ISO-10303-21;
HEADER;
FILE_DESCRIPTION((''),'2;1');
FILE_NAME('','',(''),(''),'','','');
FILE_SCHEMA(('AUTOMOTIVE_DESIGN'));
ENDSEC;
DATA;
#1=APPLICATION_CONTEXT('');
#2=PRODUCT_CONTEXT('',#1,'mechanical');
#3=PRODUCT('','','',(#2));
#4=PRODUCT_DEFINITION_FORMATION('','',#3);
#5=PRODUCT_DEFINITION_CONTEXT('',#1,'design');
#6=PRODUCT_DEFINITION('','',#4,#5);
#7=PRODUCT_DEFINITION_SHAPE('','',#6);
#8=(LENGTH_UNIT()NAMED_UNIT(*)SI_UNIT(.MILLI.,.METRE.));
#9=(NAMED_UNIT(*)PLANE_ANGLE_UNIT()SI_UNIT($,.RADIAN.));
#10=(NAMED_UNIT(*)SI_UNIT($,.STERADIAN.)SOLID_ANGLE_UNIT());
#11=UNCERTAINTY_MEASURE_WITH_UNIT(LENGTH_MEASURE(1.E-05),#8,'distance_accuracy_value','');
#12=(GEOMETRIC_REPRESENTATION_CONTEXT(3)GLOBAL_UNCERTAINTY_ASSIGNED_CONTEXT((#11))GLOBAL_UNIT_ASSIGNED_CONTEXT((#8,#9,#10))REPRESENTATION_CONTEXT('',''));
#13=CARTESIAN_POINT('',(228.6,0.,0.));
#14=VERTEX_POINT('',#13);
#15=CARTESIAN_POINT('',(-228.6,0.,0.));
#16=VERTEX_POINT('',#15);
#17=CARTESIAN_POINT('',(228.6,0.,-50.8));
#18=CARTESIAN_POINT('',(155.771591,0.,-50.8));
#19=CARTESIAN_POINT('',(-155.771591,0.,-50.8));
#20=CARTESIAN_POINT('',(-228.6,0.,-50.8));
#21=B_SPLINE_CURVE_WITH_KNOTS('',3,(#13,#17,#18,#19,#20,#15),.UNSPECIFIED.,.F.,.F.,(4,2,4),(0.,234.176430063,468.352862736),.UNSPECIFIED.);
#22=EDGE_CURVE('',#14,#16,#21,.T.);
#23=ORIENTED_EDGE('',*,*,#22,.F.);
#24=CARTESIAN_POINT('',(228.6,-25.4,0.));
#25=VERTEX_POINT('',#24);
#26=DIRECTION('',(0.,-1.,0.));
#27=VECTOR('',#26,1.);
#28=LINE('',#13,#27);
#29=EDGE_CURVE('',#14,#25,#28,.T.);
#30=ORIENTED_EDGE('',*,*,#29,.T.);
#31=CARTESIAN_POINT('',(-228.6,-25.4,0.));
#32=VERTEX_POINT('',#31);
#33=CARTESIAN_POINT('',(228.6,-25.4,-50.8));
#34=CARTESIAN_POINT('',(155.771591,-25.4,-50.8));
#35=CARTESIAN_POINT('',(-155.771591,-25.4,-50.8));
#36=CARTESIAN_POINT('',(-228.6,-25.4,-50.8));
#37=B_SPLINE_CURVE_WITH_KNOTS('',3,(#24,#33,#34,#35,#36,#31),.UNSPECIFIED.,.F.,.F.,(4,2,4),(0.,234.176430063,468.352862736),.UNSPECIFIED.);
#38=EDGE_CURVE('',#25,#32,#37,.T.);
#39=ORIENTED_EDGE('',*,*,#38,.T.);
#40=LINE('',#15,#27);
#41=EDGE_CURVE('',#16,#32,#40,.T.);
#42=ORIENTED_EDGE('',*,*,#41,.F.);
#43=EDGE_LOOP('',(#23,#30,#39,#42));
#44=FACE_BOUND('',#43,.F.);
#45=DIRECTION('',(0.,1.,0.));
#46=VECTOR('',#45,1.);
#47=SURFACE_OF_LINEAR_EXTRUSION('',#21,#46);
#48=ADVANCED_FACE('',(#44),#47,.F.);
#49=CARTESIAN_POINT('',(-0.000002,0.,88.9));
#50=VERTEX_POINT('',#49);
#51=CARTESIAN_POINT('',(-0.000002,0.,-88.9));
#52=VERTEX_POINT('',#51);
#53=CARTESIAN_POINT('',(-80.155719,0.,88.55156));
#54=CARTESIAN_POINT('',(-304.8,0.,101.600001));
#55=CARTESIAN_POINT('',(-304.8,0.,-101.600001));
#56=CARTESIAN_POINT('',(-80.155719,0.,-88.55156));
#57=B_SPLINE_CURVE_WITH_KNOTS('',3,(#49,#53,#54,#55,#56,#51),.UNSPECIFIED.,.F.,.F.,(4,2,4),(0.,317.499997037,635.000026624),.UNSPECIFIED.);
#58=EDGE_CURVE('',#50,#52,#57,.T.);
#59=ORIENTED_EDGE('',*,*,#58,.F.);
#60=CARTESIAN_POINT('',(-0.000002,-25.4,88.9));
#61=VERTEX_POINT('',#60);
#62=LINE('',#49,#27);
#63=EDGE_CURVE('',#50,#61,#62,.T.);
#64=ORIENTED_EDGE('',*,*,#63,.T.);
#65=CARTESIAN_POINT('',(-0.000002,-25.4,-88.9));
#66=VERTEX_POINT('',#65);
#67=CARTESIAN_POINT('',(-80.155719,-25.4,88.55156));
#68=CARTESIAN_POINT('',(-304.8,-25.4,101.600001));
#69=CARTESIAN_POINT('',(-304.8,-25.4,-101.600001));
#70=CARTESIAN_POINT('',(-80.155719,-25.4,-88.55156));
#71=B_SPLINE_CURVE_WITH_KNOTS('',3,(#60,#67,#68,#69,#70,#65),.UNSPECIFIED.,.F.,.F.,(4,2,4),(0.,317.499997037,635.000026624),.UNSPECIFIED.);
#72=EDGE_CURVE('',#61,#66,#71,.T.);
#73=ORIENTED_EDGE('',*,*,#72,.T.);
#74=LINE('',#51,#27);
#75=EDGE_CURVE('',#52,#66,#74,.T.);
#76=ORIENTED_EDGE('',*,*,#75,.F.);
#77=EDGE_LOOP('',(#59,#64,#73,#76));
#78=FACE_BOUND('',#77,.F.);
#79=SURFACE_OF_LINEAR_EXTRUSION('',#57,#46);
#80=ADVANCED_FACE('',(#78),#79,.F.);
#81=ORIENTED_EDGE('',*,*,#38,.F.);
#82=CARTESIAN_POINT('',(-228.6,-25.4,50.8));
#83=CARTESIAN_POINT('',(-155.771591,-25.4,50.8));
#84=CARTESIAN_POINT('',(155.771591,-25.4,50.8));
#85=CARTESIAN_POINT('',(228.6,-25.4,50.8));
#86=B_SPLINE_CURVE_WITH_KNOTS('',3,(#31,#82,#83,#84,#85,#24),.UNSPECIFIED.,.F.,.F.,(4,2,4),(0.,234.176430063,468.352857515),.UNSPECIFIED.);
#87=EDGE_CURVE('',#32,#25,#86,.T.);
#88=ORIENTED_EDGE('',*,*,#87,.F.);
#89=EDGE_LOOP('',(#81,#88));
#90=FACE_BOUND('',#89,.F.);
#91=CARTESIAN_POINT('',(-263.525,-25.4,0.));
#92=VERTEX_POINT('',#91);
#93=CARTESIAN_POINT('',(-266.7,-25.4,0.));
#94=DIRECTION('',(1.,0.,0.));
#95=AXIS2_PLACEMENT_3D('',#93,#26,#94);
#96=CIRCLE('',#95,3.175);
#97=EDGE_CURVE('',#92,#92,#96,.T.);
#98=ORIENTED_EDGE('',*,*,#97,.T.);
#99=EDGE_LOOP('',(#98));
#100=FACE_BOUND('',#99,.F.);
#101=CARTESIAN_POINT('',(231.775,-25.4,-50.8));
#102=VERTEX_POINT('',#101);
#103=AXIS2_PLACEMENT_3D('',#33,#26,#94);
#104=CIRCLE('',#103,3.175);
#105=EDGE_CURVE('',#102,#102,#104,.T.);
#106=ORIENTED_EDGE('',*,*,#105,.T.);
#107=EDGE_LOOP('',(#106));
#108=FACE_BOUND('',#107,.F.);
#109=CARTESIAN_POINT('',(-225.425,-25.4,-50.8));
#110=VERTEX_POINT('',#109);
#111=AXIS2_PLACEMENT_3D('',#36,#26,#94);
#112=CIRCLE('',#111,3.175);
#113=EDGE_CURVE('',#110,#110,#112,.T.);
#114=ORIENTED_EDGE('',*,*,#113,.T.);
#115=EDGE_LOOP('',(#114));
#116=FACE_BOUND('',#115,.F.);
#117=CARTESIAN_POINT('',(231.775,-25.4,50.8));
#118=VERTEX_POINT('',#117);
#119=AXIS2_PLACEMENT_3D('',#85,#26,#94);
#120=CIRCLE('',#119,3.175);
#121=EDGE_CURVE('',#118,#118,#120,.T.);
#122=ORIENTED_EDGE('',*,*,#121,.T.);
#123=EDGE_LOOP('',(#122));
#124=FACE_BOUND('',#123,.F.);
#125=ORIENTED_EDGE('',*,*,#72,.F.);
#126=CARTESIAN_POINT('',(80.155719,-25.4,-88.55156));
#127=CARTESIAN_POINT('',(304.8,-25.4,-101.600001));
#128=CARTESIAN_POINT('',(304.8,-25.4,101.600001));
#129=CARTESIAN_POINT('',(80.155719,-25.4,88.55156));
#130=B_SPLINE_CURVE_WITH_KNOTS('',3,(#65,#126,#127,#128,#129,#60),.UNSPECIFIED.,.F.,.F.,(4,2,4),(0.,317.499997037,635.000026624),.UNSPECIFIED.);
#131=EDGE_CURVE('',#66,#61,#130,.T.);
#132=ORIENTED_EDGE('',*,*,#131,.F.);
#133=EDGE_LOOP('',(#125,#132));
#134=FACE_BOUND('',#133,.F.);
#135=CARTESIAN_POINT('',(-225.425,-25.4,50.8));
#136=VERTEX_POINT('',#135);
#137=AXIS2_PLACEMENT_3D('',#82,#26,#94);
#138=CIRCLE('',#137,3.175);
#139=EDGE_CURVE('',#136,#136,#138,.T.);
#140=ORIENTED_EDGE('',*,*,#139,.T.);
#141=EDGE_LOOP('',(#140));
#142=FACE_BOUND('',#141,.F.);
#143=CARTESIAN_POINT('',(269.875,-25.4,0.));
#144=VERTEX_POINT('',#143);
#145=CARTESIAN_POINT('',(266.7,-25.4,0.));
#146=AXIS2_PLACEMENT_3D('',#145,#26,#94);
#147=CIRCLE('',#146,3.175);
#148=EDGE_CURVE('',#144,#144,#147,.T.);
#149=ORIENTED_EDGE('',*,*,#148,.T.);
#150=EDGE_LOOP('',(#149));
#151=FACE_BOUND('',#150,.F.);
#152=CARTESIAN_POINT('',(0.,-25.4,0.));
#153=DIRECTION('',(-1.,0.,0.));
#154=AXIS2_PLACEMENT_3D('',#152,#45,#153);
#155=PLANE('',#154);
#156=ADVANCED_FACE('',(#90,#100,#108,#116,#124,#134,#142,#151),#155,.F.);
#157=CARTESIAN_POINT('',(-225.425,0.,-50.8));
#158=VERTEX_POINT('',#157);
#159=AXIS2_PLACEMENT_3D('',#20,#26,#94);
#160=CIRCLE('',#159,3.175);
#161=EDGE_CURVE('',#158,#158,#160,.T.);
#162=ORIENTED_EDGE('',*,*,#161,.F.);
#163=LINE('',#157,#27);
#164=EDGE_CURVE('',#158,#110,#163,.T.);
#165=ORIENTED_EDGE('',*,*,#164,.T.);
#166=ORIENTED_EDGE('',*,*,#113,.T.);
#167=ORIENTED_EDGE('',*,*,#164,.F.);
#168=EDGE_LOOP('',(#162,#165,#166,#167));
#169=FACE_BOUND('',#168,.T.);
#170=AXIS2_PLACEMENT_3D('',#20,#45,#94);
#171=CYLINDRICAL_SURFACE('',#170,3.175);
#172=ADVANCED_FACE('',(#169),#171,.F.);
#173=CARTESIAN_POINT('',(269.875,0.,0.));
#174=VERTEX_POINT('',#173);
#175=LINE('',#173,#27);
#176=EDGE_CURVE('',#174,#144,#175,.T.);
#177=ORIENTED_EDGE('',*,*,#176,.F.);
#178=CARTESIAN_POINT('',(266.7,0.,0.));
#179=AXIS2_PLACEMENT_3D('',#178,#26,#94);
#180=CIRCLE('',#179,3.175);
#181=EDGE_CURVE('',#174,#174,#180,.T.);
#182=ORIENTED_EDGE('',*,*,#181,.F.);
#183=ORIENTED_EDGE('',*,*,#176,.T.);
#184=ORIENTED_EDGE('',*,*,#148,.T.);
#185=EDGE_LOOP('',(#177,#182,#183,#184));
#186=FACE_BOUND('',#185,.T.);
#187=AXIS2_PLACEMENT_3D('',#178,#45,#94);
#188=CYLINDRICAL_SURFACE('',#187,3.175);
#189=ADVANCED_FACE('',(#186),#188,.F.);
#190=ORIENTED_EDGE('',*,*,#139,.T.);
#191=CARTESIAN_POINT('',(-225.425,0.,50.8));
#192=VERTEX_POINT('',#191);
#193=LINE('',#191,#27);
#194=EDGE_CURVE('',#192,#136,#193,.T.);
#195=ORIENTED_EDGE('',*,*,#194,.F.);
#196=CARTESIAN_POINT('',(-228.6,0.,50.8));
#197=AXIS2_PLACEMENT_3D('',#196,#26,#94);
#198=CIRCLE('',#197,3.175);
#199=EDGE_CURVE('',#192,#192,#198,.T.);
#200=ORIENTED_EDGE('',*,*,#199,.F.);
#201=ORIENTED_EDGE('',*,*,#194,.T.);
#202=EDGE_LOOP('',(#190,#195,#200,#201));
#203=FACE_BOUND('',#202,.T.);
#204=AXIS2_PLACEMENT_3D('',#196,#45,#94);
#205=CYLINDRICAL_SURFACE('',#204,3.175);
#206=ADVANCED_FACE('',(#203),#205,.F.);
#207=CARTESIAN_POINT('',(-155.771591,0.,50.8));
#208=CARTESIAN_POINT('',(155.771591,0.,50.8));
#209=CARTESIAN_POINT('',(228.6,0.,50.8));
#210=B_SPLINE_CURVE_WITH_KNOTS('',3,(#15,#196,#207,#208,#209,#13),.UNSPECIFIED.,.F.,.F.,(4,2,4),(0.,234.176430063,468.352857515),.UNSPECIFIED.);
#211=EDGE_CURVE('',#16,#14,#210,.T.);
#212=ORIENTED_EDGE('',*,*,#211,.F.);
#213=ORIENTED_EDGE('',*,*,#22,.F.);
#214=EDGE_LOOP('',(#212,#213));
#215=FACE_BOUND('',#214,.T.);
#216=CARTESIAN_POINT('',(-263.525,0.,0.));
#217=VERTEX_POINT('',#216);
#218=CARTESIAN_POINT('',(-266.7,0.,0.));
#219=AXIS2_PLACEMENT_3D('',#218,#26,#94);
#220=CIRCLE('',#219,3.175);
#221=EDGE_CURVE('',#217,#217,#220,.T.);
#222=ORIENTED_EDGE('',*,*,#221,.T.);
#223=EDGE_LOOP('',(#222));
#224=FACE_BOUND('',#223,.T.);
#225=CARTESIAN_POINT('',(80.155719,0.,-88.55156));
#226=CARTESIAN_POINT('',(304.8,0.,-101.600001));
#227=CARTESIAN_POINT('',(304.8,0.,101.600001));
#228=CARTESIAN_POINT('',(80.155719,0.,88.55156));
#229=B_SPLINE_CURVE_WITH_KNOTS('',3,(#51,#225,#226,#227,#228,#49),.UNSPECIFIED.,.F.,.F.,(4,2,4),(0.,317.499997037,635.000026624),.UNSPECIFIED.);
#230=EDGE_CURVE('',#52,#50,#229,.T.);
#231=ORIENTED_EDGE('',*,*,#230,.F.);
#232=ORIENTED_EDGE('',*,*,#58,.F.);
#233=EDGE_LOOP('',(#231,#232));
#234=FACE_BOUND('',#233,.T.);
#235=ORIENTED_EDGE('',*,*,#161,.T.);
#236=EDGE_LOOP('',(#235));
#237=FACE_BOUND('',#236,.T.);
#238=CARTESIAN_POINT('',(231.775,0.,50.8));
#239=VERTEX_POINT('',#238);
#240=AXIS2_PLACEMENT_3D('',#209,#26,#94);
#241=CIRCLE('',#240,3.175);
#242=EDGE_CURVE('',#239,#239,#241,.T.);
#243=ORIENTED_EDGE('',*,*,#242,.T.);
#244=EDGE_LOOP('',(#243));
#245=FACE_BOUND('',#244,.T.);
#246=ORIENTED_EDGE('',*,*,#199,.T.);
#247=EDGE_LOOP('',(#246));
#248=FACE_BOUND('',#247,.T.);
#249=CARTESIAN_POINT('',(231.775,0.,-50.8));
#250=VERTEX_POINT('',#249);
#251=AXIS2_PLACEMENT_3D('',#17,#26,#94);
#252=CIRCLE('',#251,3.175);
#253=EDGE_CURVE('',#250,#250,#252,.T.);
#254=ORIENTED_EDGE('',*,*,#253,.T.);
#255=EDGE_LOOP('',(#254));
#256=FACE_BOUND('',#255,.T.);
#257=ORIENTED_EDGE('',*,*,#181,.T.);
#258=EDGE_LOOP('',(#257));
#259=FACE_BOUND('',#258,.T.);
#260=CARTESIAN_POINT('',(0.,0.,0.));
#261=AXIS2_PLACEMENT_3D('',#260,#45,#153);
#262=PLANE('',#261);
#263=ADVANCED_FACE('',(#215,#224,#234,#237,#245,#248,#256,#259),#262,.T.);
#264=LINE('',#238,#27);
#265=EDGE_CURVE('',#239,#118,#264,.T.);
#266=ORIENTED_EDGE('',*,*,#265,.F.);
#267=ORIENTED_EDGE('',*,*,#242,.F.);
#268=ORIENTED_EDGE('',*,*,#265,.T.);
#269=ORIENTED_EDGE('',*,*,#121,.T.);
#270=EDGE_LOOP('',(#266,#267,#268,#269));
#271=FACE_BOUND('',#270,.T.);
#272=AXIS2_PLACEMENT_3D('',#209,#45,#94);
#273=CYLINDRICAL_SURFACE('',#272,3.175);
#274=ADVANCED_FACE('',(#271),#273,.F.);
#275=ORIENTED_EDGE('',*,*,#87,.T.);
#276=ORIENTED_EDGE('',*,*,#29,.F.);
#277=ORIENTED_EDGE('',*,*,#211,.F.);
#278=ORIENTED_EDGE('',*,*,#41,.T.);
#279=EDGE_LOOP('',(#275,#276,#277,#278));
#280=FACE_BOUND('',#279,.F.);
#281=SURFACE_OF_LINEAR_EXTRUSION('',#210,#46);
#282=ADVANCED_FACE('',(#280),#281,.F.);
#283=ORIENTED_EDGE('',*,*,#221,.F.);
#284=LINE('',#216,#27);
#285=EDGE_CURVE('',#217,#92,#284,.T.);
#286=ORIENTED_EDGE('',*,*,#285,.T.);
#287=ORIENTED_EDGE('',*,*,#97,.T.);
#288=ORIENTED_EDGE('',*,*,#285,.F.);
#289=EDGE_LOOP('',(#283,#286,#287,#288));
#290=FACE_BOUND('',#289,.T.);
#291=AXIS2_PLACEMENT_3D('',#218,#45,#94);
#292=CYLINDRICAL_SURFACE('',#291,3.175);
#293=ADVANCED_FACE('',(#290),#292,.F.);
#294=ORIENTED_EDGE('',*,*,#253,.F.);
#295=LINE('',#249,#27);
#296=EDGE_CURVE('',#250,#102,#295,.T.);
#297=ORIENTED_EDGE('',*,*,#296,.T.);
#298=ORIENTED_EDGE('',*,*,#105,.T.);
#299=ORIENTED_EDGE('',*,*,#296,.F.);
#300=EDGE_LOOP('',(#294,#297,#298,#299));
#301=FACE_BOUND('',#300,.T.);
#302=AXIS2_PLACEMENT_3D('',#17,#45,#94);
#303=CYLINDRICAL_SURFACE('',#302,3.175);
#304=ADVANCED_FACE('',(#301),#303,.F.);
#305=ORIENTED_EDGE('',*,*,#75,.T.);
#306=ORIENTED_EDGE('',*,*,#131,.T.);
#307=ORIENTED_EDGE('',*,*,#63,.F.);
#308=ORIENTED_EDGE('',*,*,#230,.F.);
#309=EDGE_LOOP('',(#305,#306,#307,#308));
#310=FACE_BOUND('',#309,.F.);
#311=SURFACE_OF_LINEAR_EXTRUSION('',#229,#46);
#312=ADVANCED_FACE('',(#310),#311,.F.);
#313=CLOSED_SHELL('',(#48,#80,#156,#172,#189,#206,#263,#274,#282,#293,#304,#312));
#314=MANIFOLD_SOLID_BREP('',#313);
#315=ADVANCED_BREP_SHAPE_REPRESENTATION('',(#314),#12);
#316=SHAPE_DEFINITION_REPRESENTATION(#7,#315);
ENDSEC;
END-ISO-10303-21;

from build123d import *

# Parameters (mm, degrees)
F0_R     = 3.175
F1_DEPTH = 25.4


# Not quite as in the source:
# - ends of sketch curves that miss each other by under 0.0002 mm in the source are joined


with BuildPart() as f1:
    # F0 (on Front) → F1 (new body)
    with BuildSketch(Plane.XZ):
        with BuildLine():
            add(Edge.make_bspline(
                [(-304.8, 5.2081e-06), (-304.8, 101.6000008473), (-80.1557193555, 88.5515600587), (-1.5676e-06, 88.9)],
                knots=[0, 0, 0, 0, 317.4999970368, 317.4999970368, 317.4999970368, 317.4999970368], degree=3))
            add(Edge.make_bspline(
                [(-304.8, 5.2081e-06), (-304.8, -101.6000008473), (-80.1557193555, -88.5515600587), (-1.5676e-06, -88.9)],
                knots=[0, 0, 0, 0, 317.4999970368, 317.4999970368, 317.4999970368, 317.4999970368], degree=3))
            add(Edge.make_bspline(
                [(304.8, -5.2081e-06), (304.8, -101.6000008473), (80.1557193555, -88.5515600587), (-1.5676e-06, -88.9)],
                knots=[0, 0, 0, 0, 317.4999970368, 317.4999970368, 317.4999970368, 317.4999970368], degree=3))
            add(Edge.make_bspline(
                [(304.8, -5.2081e-06), (304.8, 101.6000008473), (80.1557193555, 88.5515600587), (-1.5676e-06, 88.9)],
                knots=[0, 0, 0, 0, 317.4999970368, 317.4999970368, 317.4999970368, 317.4999970368], degree=3))
        make_face()
        with Locations((-228.5999996275, -50.8)):
            Circle(F0_R, mode=Mode.SUBTRACT)
        with Locations((228.5999996275, -50.8)):
            Circle(F0_R, mode=Mode.SUBTRACT)
        with Locations((-266.7, 0)):
            Circle(F0_R, mode=Mode.SUBTRACT)
        with Locations((-228.5999996275, 50.8)):
            Circle(F0_R, mode=Mode.SUBTRACT)
        with BuildLine():
            add(Edge.make_bspline(
                [(-228.6, 0), (-228.5999996275, -50.8), (-155.7715911424, -50.8), (8.682e-07, -50.8)],
                knots=[0, 0, 0, 0, 234.1764300628, 234.1764300628, 234.1764300628, 234.1764300628], degree=3))
            add(Edge.make_bspline(
                [(-228.6, 0), (-228.5999996275, 50.8), (-155.7715911424, 50.8), (8.682e-07, 50.8)],
                knots=[0, 0, 0, 0, 234.1764300628, 234.1764300628, 234.1764300628, 234.1764300628], degree=3))
            add(Edge.make_bspline(
                [(228.6, 0), (228.5999996275, 50.8), (155.7715911424, 50.8), (8.682e-07, 50.8)],
                knots=[0, 0, 0, 0, 234.1764300628, 234.1764300628, 234.1764300628, 234.1764300628], degree=3))
            add(Edge.make_bspline(
                [(228.6, 0), (228.5999996275, -50.8), (155.7715911424, -50.8), (8.682e-07, -50.8)],
                knots=[0, 0, 0, 0, 234.1764300628, 234.1764300628, 234.1764300628, 234.1764300628], degree=3))
        make_face(mode=Mode.SUBTRACT)
        with Locations((266.7, 0)):
            Circle(F0_R, mode=Mode.SUBTRACT)
        with Locations((228.5999996275, 50.8)):
            Circle(F0_R, mode=Mode.SUBTRACT)
    extrude(amount=F1_DEPTH)


solid = f1.part
